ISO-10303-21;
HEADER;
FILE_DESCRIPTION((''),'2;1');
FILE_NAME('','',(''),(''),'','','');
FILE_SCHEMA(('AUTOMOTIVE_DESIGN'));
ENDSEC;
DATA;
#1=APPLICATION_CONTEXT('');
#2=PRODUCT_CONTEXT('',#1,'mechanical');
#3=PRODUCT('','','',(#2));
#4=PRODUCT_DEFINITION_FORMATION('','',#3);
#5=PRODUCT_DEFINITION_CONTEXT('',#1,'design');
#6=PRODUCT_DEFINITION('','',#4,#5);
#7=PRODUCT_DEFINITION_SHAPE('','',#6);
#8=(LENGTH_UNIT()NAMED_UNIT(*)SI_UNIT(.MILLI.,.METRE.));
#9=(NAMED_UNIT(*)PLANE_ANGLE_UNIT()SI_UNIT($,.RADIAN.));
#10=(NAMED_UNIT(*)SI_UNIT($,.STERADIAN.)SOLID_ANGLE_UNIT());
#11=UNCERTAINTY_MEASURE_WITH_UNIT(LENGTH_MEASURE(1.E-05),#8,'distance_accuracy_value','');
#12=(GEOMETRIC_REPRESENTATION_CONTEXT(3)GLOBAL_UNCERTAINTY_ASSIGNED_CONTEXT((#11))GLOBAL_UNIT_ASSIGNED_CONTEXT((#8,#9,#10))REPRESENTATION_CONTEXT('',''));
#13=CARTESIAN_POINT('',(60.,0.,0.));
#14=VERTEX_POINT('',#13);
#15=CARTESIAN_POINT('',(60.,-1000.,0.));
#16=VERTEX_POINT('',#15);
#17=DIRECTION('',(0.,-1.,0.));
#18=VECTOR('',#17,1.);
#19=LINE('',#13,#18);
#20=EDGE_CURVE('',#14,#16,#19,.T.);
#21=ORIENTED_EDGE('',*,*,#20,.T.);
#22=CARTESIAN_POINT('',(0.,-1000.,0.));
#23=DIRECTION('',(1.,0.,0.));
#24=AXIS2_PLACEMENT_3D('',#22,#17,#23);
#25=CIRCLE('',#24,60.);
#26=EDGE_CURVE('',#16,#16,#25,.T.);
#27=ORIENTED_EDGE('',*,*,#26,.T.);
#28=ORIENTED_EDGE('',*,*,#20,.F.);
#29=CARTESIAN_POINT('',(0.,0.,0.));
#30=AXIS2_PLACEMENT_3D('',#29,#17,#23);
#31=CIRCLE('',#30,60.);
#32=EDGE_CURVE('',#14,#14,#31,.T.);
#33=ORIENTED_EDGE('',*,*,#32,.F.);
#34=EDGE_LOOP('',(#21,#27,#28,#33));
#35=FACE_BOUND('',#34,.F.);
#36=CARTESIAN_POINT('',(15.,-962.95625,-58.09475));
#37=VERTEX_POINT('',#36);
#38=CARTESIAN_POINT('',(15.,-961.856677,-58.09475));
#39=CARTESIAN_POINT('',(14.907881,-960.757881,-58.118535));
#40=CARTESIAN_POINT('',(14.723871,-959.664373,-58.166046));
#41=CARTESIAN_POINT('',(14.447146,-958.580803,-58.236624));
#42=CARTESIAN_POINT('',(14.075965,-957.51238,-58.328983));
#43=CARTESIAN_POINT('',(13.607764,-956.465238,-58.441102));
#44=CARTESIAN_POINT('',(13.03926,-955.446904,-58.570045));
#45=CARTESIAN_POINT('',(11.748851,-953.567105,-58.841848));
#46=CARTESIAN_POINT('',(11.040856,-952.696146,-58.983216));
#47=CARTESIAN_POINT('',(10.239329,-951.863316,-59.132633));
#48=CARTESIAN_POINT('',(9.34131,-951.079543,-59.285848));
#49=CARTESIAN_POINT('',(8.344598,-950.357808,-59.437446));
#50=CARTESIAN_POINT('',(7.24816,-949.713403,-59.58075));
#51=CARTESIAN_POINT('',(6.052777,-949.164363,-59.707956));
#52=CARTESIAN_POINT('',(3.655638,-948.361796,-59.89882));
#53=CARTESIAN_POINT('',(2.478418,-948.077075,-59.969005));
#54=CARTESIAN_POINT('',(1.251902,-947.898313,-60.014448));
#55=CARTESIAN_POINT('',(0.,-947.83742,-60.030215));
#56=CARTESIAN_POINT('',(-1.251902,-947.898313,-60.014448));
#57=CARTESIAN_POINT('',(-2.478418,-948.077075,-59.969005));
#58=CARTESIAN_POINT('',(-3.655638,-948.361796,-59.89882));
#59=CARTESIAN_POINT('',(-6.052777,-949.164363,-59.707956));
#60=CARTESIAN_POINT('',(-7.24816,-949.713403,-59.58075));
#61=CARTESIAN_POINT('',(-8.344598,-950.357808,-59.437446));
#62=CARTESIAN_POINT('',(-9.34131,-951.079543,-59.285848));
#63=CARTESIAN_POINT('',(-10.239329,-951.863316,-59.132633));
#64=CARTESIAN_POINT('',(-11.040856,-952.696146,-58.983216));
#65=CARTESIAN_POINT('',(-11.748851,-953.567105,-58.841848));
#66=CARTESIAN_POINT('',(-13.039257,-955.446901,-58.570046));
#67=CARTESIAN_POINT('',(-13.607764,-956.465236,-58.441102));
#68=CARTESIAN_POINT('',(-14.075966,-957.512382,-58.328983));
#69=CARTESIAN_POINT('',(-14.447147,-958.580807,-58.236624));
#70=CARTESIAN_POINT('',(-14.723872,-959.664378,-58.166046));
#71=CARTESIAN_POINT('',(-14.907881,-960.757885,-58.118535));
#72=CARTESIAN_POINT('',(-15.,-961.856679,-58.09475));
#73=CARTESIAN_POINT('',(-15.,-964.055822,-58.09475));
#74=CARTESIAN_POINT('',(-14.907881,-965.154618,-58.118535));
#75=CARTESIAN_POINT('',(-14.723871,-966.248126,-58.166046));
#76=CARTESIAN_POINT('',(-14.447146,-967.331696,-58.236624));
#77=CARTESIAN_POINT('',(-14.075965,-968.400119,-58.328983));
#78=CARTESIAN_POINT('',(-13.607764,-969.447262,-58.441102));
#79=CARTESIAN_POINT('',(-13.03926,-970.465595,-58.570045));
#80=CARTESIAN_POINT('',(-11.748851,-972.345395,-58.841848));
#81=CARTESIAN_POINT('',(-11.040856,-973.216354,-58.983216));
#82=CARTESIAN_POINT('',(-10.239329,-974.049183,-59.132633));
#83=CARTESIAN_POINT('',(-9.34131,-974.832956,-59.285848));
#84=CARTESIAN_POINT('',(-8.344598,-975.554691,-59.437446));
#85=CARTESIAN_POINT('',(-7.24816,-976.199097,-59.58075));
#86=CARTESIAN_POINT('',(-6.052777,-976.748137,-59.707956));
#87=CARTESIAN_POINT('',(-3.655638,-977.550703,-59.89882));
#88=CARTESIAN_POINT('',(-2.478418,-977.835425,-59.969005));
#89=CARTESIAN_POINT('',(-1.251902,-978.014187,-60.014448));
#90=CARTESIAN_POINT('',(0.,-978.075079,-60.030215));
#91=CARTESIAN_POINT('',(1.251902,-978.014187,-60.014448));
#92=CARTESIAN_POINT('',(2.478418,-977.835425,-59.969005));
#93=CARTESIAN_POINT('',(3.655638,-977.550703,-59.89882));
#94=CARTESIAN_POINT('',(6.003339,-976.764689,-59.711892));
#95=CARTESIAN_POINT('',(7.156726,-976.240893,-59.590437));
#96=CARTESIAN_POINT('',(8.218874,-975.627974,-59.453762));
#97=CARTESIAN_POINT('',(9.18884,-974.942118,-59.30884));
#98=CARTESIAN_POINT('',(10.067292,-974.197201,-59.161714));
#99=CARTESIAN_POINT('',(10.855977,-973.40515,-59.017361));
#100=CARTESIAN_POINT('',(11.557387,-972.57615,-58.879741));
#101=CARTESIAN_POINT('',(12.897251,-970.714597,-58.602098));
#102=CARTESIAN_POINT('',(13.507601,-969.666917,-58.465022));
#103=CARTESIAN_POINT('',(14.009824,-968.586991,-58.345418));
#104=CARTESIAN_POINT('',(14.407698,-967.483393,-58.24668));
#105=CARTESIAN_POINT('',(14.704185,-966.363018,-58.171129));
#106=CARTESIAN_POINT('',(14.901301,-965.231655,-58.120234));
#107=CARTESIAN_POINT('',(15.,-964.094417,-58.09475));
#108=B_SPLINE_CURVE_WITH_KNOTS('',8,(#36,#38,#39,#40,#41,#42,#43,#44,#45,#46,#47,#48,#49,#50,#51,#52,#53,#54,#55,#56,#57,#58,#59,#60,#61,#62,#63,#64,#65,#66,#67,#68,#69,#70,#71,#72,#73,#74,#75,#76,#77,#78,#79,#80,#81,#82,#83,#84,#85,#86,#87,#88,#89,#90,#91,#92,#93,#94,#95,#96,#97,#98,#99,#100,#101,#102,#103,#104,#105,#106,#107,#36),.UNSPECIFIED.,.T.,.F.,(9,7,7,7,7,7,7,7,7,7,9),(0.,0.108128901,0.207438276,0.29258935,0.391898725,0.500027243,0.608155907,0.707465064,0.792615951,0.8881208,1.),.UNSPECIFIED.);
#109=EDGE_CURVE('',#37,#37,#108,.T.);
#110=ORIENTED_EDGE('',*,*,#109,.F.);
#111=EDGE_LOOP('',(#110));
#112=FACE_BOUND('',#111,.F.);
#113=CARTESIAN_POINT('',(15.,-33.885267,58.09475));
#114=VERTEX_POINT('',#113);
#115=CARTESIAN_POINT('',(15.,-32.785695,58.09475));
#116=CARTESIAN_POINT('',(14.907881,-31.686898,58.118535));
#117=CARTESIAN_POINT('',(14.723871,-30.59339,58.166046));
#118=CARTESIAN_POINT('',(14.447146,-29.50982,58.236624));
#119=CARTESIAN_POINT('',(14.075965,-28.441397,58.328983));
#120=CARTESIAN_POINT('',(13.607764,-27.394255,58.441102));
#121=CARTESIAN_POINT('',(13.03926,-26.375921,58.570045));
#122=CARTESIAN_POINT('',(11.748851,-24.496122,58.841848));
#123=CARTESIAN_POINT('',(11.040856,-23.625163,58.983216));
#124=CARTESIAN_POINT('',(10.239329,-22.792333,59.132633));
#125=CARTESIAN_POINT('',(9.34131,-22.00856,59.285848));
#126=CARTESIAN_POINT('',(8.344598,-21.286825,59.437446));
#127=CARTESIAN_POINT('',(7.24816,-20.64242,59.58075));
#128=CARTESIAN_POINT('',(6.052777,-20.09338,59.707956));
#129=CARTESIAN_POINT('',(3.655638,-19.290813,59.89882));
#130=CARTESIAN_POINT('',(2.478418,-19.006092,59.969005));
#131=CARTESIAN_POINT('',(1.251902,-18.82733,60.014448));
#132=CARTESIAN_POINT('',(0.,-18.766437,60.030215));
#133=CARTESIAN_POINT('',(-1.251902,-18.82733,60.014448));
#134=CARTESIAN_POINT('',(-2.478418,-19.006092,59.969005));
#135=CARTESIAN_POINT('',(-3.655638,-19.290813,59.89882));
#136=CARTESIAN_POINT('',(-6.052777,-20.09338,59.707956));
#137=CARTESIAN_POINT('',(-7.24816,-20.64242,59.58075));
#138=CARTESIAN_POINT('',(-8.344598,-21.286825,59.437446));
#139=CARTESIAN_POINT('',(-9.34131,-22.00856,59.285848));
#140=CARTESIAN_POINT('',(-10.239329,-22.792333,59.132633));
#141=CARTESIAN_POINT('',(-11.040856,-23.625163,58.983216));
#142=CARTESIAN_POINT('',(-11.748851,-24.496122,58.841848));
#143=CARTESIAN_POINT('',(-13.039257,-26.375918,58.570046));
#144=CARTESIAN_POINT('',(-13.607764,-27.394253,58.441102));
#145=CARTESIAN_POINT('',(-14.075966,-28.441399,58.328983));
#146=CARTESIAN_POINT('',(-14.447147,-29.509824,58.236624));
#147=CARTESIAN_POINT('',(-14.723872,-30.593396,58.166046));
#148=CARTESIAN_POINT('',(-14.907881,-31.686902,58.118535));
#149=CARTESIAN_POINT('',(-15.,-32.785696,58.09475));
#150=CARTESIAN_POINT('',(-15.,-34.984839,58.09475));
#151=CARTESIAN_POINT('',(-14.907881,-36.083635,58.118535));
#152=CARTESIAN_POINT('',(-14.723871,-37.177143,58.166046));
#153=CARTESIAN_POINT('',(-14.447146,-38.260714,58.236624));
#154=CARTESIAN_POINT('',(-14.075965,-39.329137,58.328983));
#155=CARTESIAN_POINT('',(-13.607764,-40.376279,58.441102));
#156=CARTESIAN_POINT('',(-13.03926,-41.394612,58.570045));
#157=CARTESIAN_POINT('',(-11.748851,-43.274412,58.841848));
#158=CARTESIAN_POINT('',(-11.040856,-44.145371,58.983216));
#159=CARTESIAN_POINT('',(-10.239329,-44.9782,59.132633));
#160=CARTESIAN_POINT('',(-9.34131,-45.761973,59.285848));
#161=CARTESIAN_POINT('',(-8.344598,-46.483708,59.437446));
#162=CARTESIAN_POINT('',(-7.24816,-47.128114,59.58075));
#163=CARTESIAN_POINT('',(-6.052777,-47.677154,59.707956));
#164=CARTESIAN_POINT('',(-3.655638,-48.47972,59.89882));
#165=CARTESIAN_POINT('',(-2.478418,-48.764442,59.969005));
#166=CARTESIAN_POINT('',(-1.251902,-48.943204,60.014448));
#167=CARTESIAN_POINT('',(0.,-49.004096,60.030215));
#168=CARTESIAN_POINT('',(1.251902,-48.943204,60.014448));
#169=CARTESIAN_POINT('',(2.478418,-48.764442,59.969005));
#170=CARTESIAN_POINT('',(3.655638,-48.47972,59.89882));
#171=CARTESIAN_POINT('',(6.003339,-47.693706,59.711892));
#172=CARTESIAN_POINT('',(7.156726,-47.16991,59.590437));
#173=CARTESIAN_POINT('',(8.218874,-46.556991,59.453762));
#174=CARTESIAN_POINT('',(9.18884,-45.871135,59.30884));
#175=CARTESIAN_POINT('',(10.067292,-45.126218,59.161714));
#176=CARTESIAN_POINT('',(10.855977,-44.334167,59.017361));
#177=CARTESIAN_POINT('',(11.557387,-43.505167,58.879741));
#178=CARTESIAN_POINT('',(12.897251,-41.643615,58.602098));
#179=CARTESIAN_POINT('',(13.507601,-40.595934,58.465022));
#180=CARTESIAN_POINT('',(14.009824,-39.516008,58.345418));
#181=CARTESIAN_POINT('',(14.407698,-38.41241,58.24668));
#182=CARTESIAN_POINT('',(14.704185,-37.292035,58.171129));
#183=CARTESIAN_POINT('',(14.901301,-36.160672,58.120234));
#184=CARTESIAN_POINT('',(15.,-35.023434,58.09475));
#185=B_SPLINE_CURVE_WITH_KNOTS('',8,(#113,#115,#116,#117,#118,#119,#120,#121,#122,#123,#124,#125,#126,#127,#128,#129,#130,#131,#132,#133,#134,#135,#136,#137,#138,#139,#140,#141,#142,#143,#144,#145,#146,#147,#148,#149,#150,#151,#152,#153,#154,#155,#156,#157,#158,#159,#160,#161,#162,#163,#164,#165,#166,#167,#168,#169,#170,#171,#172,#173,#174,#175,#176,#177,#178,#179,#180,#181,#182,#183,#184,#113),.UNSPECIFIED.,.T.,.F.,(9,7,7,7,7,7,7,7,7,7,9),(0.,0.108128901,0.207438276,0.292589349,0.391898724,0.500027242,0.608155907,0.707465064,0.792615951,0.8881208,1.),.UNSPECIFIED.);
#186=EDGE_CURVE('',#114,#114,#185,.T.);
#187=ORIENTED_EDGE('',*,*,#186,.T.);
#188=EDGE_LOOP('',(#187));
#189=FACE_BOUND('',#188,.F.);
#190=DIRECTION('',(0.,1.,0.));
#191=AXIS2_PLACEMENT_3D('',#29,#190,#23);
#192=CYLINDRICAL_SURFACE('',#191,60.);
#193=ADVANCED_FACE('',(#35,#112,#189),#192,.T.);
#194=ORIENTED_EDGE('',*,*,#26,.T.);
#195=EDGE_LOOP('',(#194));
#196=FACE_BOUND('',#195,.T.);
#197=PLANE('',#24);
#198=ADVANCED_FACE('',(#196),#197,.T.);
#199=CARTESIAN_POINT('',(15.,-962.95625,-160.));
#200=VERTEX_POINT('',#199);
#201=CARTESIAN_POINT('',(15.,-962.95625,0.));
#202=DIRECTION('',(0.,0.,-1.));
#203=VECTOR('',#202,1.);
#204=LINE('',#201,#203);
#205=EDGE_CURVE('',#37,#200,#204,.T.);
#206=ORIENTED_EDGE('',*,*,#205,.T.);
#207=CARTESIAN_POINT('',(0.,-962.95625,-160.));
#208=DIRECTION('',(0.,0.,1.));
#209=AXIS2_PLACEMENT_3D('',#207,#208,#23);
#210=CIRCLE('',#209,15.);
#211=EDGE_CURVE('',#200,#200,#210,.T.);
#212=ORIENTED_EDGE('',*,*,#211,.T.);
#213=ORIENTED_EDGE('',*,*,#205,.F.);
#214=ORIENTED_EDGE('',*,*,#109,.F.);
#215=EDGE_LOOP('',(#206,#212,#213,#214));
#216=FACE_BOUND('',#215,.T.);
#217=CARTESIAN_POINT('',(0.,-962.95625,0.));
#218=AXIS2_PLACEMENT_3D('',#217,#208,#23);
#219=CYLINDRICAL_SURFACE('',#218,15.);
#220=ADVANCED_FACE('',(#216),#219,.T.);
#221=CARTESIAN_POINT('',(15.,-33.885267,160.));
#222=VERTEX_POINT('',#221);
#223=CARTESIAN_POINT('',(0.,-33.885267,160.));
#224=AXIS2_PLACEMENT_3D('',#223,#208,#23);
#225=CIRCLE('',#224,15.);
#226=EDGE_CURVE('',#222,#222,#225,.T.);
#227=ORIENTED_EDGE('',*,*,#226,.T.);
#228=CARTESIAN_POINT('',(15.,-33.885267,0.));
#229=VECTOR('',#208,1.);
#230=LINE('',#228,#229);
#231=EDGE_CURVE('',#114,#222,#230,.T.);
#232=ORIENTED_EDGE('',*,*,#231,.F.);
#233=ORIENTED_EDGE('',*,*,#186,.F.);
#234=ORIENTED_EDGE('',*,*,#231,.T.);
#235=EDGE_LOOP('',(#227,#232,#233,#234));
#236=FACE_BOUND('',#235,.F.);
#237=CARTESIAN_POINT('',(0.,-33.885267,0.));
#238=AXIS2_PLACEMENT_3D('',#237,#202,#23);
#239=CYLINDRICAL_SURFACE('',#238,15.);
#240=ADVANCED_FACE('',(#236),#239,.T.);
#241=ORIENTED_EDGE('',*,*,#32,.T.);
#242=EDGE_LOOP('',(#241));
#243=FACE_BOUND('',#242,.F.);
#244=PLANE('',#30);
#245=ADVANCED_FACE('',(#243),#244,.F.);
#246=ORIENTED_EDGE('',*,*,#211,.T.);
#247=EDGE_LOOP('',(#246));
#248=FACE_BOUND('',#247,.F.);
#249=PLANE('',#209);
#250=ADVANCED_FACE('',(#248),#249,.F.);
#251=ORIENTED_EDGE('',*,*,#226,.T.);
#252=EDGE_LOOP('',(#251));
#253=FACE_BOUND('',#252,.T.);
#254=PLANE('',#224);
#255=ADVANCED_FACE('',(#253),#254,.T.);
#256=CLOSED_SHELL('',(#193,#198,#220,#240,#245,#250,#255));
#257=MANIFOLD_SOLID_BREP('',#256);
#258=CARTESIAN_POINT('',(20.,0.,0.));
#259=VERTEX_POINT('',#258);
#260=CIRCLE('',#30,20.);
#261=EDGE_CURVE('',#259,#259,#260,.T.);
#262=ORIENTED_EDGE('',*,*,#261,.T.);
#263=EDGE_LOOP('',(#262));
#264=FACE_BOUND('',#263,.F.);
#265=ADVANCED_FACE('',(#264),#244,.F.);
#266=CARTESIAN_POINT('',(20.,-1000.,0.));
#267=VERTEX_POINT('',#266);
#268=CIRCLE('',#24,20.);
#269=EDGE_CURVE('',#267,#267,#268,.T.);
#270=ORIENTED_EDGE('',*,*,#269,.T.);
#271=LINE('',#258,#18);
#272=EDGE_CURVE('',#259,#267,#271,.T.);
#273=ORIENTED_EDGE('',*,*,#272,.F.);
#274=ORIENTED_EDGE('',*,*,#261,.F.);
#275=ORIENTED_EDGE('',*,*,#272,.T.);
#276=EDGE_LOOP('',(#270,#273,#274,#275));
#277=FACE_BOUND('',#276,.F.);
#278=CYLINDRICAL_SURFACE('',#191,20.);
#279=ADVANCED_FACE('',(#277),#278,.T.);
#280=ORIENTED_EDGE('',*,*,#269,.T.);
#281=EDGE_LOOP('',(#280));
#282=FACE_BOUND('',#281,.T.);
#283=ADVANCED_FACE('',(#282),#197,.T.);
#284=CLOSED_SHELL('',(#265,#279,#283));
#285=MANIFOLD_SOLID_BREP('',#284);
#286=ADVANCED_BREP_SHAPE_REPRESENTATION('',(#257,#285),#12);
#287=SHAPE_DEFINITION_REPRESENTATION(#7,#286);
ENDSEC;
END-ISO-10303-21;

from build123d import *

# Parameters (mm, degrees)
F0_R     = 60
F2_DEPTH = 1000
F1_R     = 20
F3_R     = 15
F4_DEPTH = 160
F5_R     = 15
F6_DEPTH = 160


with BuildPart() as f2:
    # F0 (on Front) → F2 (new body)
    with BuildSketch(Plane.XZ):
        Circle(F0_R)
    extrude(amount=F2_DEPTH)

    # F3 (on Top) → F4 (join)
    with BuildSketch(Plane.XY):
        with Locations((0, -33.885266772)):
            Circle(F3_R)
    extrude(amount=F4_DEPTH)

    # F5 (on Top) → F6 (join)
    with BuildSketch(Plane.XY):
        with Locations((0, -962.9562497139)):
            Circle(F5_R)
    extrude(amount=-F6_DEPTH)


with BuildPart() as f2b:
    # F1 (on Front) → F2, piece 2 (new body)
    with BuildSketch(Plane.XZ):
        Circle(F1_R)
    extrude(amount=F2_DEPTH)


solid = Compound([f2.part, f2b.part])
